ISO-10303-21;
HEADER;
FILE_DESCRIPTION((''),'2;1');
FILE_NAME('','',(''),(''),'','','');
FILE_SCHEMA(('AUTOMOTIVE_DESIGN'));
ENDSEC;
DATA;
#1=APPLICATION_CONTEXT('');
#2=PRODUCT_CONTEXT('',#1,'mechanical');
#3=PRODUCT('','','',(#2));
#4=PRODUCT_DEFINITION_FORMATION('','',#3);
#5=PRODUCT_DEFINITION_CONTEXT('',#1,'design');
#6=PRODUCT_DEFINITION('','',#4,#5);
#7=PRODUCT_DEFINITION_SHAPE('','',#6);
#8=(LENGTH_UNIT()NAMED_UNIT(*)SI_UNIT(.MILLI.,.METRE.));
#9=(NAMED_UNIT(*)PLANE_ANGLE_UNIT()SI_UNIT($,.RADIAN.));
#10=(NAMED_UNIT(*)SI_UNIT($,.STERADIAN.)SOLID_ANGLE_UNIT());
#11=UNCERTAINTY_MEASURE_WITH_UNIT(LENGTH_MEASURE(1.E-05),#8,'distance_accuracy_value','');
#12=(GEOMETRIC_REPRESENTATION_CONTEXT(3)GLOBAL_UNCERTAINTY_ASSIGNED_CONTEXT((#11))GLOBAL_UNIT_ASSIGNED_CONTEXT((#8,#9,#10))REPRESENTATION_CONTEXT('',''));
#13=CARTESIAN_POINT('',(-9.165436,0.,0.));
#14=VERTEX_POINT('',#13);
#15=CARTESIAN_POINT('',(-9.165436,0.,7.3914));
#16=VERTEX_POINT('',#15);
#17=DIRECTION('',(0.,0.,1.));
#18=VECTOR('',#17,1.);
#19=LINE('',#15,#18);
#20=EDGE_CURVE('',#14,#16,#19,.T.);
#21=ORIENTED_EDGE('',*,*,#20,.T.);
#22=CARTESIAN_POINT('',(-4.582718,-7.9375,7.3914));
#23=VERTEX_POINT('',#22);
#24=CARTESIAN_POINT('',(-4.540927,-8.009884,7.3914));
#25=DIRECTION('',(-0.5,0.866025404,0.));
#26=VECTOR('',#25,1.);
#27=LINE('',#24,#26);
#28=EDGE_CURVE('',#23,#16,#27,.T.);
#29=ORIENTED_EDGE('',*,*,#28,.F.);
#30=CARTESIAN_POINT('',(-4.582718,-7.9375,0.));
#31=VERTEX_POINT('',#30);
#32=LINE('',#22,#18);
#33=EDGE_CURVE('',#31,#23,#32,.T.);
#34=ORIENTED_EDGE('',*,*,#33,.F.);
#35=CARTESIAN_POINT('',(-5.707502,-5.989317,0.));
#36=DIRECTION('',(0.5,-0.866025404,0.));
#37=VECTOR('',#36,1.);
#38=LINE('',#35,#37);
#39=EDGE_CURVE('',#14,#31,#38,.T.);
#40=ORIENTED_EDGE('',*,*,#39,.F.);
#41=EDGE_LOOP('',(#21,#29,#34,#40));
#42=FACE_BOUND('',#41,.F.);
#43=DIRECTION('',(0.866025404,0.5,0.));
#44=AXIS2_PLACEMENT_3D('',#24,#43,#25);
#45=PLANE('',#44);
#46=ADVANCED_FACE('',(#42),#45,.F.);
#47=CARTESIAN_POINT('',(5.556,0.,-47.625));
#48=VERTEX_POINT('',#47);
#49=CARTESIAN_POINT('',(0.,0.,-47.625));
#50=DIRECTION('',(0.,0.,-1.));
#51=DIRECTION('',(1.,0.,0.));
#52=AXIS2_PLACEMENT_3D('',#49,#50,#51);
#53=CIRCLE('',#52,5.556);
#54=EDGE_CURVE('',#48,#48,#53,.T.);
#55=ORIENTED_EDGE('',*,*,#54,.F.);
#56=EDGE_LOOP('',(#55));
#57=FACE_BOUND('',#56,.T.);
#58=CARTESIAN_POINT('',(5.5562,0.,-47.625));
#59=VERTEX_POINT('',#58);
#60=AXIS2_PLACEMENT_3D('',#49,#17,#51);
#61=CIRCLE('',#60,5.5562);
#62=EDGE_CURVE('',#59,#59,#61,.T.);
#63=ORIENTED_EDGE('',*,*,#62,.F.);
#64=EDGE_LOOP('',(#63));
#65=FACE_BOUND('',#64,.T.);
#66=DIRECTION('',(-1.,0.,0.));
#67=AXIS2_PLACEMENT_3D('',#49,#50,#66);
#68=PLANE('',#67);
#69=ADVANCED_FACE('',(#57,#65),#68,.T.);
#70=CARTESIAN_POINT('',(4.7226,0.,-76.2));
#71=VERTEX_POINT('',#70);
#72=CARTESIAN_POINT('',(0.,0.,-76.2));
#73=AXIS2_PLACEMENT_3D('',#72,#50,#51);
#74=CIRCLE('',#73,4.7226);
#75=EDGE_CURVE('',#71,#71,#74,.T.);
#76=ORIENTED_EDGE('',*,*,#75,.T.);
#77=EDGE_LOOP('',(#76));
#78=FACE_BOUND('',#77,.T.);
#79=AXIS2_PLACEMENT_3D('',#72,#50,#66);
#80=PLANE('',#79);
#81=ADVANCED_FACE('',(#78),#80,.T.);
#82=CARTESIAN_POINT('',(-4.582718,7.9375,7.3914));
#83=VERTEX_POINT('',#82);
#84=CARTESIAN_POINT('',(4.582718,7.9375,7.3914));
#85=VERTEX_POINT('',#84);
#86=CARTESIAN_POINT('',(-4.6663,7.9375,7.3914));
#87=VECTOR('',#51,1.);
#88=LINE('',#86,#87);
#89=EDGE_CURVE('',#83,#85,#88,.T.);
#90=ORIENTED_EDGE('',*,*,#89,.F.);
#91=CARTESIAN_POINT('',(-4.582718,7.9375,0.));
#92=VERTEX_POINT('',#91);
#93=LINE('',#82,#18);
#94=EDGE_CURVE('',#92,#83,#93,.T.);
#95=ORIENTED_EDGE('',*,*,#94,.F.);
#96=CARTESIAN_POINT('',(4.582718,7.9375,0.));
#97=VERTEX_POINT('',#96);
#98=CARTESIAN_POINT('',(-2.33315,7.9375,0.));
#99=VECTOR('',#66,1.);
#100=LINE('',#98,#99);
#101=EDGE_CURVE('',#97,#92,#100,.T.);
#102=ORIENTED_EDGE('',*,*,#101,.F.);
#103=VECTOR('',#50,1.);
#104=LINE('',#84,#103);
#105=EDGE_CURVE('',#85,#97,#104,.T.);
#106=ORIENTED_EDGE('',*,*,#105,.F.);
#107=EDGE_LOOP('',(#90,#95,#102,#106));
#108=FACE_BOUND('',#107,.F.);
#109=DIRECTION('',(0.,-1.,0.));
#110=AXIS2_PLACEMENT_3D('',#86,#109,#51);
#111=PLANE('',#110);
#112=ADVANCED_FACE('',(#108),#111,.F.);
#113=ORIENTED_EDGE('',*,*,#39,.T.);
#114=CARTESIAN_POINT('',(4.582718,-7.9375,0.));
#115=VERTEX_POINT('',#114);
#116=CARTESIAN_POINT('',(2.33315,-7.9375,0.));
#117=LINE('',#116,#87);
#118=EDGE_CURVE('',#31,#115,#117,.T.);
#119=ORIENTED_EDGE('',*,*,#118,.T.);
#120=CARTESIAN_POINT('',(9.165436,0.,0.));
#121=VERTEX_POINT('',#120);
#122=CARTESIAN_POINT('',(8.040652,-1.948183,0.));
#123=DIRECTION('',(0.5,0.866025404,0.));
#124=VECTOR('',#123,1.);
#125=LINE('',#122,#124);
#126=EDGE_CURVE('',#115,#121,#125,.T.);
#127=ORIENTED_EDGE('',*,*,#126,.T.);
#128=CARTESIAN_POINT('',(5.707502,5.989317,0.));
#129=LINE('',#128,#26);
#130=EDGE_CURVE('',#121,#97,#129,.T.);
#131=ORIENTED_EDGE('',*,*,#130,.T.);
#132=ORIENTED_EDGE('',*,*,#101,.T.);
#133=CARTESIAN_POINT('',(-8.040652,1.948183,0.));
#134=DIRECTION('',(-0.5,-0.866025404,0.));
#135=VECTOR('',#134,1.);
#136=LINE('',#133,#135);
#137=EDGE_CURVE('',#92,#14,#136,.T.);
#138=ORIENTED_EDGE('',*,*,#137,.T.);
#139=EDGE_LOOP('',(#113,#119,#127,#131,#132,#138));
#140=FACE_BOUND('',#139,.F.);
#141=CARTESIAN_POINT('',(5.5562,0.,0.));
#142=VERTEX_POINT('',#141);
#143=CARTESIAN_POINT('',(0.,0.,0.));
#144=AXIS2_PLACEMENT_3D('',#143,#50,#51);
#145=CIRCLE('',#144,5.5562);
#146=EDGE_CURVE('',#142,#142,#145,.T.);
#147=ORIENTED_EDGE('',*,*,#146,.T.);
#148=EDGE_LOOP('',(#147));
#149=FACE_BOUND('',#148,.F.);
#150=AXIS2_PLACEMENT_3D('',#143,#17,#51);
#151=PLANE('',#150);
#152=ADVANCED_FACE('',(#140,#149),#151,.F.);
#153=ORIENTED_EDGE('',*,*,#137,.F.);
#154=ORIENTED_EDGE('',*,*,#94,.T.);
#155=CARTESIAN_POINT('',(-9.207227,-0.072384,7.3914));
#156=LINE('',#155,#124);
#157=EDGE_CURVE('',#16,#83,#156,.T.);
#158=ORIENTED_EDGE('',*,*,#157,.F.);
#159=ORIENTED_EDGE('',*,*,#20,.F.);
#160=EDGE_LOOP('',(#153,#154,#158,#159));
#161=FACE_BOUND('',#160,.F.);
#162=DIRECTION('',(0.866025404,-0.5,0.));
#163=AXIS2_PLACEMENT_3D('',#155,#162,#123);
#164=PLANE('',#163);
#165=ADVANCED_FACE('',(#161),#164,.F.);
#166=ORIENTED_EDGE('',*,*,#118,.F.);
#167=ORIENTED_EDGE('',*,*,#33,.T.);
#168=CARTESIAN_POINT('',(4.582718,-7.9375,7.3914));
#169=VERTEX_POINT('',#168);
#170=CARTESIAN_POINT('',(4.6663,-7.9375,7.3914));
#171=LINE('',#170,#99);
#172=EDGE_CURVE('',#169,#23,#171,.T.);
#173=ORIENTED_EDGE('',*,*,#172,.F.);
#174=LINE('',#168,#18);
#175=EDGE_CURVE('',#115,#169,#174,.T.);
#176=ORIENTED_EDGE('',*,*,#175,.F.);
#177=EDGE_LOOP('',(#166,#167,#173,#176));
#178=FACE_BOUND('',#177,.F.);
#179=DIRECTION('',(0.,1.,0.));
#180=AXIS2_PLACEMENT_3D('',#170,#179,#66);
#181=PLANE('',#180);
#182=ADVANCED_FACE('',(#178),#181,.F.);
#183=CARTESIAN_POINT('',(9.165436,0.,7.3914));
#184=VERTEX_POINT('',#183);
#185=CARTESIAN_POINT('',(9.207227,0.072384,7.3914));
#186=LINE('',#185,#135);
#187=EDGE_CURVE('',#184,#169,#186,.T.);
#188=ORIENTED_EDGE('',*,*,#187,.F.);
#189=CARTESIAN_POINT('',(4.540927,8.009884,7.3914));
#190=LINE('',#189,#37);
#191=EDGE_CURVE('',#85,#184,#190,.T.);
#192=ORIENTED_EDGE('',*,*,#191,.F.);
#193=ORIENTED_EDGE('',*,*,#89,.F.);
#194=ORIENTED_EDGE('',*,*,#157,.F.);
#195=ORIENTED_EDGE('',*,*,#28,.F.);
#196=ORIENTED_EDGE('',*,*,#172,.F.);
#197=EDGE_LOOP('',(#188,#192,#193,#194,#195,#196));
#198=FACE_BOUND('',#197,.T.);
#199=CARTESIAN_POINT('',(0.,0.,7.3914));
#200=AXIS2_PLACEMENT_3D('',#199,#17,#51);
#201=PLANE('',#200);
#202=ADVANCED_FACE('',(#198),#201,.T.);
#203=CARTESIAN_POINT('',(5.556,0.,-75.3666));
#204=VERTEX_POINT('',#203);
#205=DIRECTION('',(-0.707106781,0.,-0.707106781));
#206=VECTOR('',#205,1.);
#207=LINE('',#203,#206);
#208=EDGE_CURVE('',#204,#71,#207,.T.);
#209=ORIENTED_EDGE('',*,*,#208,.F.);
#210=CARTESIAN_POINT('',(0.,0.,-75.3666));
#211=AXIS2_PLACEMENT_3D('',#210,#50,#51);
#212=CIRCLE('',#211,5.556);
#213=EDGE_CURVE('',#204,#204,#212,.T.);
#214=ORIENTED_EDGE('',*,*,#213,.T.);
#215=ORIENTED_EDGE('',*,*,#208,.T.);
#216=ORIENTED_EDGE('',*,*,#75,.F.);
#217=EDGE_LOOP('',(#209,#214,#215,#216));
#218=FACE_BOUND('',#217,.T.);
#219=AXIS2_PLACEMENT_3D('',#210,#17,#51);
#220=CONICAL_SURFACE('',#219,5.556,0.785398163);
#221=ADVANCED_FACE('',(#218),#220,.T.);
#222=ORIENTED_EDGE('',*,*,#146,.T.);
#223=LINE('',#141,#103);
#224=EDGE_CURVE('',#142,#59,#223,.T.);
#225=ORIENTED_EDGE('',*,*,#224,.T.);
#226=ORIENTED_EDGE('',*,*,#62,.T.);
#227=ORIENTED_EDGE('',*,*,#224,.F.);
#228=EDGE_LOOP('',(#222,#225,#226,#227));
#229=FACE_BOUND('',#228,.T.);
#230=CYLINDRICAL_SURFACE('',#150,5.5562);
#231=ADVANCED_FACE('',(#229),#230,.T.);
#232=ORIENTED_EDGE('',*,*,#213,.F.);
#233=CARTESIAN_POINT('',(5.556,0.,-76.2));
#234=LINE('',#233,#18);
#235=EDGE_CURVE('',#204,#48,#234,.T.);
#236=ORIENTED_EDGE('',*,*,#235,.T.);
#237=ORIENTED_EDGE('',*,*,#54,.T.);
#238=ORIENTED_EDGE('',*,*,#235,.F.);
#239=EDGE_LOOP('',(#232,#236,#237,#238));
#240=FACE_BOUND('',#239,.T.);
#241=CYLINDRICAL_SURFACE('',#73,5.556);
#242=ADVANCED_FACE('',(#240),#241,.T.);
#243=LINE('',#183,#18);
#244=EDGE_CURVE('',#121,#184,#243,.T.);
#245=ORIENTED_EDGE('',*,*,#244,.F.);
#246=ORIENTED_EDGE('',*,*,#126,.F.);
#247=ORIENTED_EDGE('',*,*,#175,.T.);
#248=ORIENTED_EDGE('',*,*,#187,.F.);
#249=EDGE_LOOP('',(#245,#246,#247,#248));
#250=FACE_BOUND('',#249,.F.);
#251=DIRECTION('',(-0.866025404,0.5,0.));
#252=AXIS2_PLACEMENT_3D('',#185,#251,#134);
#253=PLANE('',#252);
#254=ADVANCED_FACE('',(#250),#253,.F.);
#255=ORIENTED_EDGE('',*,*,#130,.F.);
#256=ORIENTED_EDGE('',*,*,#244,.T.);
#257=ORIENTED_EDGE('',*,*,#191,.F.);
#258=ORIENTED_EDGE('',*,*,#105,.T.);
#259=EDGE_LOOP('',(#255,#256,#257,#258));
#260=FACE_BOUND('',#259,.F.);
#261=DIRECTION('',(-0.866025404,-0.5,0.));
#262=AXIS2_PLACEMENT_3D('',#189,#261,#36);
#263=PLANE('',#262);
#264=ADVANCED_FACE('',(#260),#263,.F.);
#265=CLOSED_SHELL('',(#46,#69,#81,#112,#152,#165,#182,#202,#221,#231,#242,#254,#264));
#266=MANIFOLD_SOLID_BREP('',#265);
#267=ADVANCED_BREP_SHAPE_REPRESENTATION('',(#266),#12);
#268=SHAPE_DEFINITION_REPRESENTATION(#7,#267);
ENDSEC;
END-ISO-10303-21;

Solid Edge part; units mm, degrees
sketch "Sketch1" plane through (0, 0, 0) normal (0, 0, 1) x (1, 0, 0)
  circle A0 centre (0, 0) radius 9.2075
  dimension "D1" = 18.415
extrude "Protrusion1" add sketch "Sketch1" along normal blind 7.3914
sketch "Sketch2" plane through (0, 0, 0) normal (0, 0, -1) x (1, 0, 0)
  circle A0 centre (0, 0) radius 5.5562
extrude "Protrusion2" add sketch "Sketch2" along normal blind 76.2
sketch "Sketch3" plane through (0, 0, -76.2) normal (0, 0, -1) x (1, 0, 0)
  circle A0 centre (0, 0) radius 5.556
extrude "Cutout1" cut sketch "Sketch3" against normal blind 28.575 flip side to cut
chamfer "Chamfer_1" distance 0.8334 angle 45 1 edges at (-5.556, 0, -76.2)
sketch "Sketch4" plane through (0, 0, 7.3914) normal (0, 0, 1) x (1, 0, 0)
  line L0 (-4.6663, 7.9375) -> (4.6663, 7.9375)
  dimension "D1" = 15.875
extrude "Cutout2" cut sketch "Sketch4" against normal up to next material side at (0, 7.9875, 7.3914)
pattern_circular "Pattern1" count 6 over 360 about axis through (0, 0, 7.3914) along (0, 0, 1) of "Cutout2"
properties part number "117356"
